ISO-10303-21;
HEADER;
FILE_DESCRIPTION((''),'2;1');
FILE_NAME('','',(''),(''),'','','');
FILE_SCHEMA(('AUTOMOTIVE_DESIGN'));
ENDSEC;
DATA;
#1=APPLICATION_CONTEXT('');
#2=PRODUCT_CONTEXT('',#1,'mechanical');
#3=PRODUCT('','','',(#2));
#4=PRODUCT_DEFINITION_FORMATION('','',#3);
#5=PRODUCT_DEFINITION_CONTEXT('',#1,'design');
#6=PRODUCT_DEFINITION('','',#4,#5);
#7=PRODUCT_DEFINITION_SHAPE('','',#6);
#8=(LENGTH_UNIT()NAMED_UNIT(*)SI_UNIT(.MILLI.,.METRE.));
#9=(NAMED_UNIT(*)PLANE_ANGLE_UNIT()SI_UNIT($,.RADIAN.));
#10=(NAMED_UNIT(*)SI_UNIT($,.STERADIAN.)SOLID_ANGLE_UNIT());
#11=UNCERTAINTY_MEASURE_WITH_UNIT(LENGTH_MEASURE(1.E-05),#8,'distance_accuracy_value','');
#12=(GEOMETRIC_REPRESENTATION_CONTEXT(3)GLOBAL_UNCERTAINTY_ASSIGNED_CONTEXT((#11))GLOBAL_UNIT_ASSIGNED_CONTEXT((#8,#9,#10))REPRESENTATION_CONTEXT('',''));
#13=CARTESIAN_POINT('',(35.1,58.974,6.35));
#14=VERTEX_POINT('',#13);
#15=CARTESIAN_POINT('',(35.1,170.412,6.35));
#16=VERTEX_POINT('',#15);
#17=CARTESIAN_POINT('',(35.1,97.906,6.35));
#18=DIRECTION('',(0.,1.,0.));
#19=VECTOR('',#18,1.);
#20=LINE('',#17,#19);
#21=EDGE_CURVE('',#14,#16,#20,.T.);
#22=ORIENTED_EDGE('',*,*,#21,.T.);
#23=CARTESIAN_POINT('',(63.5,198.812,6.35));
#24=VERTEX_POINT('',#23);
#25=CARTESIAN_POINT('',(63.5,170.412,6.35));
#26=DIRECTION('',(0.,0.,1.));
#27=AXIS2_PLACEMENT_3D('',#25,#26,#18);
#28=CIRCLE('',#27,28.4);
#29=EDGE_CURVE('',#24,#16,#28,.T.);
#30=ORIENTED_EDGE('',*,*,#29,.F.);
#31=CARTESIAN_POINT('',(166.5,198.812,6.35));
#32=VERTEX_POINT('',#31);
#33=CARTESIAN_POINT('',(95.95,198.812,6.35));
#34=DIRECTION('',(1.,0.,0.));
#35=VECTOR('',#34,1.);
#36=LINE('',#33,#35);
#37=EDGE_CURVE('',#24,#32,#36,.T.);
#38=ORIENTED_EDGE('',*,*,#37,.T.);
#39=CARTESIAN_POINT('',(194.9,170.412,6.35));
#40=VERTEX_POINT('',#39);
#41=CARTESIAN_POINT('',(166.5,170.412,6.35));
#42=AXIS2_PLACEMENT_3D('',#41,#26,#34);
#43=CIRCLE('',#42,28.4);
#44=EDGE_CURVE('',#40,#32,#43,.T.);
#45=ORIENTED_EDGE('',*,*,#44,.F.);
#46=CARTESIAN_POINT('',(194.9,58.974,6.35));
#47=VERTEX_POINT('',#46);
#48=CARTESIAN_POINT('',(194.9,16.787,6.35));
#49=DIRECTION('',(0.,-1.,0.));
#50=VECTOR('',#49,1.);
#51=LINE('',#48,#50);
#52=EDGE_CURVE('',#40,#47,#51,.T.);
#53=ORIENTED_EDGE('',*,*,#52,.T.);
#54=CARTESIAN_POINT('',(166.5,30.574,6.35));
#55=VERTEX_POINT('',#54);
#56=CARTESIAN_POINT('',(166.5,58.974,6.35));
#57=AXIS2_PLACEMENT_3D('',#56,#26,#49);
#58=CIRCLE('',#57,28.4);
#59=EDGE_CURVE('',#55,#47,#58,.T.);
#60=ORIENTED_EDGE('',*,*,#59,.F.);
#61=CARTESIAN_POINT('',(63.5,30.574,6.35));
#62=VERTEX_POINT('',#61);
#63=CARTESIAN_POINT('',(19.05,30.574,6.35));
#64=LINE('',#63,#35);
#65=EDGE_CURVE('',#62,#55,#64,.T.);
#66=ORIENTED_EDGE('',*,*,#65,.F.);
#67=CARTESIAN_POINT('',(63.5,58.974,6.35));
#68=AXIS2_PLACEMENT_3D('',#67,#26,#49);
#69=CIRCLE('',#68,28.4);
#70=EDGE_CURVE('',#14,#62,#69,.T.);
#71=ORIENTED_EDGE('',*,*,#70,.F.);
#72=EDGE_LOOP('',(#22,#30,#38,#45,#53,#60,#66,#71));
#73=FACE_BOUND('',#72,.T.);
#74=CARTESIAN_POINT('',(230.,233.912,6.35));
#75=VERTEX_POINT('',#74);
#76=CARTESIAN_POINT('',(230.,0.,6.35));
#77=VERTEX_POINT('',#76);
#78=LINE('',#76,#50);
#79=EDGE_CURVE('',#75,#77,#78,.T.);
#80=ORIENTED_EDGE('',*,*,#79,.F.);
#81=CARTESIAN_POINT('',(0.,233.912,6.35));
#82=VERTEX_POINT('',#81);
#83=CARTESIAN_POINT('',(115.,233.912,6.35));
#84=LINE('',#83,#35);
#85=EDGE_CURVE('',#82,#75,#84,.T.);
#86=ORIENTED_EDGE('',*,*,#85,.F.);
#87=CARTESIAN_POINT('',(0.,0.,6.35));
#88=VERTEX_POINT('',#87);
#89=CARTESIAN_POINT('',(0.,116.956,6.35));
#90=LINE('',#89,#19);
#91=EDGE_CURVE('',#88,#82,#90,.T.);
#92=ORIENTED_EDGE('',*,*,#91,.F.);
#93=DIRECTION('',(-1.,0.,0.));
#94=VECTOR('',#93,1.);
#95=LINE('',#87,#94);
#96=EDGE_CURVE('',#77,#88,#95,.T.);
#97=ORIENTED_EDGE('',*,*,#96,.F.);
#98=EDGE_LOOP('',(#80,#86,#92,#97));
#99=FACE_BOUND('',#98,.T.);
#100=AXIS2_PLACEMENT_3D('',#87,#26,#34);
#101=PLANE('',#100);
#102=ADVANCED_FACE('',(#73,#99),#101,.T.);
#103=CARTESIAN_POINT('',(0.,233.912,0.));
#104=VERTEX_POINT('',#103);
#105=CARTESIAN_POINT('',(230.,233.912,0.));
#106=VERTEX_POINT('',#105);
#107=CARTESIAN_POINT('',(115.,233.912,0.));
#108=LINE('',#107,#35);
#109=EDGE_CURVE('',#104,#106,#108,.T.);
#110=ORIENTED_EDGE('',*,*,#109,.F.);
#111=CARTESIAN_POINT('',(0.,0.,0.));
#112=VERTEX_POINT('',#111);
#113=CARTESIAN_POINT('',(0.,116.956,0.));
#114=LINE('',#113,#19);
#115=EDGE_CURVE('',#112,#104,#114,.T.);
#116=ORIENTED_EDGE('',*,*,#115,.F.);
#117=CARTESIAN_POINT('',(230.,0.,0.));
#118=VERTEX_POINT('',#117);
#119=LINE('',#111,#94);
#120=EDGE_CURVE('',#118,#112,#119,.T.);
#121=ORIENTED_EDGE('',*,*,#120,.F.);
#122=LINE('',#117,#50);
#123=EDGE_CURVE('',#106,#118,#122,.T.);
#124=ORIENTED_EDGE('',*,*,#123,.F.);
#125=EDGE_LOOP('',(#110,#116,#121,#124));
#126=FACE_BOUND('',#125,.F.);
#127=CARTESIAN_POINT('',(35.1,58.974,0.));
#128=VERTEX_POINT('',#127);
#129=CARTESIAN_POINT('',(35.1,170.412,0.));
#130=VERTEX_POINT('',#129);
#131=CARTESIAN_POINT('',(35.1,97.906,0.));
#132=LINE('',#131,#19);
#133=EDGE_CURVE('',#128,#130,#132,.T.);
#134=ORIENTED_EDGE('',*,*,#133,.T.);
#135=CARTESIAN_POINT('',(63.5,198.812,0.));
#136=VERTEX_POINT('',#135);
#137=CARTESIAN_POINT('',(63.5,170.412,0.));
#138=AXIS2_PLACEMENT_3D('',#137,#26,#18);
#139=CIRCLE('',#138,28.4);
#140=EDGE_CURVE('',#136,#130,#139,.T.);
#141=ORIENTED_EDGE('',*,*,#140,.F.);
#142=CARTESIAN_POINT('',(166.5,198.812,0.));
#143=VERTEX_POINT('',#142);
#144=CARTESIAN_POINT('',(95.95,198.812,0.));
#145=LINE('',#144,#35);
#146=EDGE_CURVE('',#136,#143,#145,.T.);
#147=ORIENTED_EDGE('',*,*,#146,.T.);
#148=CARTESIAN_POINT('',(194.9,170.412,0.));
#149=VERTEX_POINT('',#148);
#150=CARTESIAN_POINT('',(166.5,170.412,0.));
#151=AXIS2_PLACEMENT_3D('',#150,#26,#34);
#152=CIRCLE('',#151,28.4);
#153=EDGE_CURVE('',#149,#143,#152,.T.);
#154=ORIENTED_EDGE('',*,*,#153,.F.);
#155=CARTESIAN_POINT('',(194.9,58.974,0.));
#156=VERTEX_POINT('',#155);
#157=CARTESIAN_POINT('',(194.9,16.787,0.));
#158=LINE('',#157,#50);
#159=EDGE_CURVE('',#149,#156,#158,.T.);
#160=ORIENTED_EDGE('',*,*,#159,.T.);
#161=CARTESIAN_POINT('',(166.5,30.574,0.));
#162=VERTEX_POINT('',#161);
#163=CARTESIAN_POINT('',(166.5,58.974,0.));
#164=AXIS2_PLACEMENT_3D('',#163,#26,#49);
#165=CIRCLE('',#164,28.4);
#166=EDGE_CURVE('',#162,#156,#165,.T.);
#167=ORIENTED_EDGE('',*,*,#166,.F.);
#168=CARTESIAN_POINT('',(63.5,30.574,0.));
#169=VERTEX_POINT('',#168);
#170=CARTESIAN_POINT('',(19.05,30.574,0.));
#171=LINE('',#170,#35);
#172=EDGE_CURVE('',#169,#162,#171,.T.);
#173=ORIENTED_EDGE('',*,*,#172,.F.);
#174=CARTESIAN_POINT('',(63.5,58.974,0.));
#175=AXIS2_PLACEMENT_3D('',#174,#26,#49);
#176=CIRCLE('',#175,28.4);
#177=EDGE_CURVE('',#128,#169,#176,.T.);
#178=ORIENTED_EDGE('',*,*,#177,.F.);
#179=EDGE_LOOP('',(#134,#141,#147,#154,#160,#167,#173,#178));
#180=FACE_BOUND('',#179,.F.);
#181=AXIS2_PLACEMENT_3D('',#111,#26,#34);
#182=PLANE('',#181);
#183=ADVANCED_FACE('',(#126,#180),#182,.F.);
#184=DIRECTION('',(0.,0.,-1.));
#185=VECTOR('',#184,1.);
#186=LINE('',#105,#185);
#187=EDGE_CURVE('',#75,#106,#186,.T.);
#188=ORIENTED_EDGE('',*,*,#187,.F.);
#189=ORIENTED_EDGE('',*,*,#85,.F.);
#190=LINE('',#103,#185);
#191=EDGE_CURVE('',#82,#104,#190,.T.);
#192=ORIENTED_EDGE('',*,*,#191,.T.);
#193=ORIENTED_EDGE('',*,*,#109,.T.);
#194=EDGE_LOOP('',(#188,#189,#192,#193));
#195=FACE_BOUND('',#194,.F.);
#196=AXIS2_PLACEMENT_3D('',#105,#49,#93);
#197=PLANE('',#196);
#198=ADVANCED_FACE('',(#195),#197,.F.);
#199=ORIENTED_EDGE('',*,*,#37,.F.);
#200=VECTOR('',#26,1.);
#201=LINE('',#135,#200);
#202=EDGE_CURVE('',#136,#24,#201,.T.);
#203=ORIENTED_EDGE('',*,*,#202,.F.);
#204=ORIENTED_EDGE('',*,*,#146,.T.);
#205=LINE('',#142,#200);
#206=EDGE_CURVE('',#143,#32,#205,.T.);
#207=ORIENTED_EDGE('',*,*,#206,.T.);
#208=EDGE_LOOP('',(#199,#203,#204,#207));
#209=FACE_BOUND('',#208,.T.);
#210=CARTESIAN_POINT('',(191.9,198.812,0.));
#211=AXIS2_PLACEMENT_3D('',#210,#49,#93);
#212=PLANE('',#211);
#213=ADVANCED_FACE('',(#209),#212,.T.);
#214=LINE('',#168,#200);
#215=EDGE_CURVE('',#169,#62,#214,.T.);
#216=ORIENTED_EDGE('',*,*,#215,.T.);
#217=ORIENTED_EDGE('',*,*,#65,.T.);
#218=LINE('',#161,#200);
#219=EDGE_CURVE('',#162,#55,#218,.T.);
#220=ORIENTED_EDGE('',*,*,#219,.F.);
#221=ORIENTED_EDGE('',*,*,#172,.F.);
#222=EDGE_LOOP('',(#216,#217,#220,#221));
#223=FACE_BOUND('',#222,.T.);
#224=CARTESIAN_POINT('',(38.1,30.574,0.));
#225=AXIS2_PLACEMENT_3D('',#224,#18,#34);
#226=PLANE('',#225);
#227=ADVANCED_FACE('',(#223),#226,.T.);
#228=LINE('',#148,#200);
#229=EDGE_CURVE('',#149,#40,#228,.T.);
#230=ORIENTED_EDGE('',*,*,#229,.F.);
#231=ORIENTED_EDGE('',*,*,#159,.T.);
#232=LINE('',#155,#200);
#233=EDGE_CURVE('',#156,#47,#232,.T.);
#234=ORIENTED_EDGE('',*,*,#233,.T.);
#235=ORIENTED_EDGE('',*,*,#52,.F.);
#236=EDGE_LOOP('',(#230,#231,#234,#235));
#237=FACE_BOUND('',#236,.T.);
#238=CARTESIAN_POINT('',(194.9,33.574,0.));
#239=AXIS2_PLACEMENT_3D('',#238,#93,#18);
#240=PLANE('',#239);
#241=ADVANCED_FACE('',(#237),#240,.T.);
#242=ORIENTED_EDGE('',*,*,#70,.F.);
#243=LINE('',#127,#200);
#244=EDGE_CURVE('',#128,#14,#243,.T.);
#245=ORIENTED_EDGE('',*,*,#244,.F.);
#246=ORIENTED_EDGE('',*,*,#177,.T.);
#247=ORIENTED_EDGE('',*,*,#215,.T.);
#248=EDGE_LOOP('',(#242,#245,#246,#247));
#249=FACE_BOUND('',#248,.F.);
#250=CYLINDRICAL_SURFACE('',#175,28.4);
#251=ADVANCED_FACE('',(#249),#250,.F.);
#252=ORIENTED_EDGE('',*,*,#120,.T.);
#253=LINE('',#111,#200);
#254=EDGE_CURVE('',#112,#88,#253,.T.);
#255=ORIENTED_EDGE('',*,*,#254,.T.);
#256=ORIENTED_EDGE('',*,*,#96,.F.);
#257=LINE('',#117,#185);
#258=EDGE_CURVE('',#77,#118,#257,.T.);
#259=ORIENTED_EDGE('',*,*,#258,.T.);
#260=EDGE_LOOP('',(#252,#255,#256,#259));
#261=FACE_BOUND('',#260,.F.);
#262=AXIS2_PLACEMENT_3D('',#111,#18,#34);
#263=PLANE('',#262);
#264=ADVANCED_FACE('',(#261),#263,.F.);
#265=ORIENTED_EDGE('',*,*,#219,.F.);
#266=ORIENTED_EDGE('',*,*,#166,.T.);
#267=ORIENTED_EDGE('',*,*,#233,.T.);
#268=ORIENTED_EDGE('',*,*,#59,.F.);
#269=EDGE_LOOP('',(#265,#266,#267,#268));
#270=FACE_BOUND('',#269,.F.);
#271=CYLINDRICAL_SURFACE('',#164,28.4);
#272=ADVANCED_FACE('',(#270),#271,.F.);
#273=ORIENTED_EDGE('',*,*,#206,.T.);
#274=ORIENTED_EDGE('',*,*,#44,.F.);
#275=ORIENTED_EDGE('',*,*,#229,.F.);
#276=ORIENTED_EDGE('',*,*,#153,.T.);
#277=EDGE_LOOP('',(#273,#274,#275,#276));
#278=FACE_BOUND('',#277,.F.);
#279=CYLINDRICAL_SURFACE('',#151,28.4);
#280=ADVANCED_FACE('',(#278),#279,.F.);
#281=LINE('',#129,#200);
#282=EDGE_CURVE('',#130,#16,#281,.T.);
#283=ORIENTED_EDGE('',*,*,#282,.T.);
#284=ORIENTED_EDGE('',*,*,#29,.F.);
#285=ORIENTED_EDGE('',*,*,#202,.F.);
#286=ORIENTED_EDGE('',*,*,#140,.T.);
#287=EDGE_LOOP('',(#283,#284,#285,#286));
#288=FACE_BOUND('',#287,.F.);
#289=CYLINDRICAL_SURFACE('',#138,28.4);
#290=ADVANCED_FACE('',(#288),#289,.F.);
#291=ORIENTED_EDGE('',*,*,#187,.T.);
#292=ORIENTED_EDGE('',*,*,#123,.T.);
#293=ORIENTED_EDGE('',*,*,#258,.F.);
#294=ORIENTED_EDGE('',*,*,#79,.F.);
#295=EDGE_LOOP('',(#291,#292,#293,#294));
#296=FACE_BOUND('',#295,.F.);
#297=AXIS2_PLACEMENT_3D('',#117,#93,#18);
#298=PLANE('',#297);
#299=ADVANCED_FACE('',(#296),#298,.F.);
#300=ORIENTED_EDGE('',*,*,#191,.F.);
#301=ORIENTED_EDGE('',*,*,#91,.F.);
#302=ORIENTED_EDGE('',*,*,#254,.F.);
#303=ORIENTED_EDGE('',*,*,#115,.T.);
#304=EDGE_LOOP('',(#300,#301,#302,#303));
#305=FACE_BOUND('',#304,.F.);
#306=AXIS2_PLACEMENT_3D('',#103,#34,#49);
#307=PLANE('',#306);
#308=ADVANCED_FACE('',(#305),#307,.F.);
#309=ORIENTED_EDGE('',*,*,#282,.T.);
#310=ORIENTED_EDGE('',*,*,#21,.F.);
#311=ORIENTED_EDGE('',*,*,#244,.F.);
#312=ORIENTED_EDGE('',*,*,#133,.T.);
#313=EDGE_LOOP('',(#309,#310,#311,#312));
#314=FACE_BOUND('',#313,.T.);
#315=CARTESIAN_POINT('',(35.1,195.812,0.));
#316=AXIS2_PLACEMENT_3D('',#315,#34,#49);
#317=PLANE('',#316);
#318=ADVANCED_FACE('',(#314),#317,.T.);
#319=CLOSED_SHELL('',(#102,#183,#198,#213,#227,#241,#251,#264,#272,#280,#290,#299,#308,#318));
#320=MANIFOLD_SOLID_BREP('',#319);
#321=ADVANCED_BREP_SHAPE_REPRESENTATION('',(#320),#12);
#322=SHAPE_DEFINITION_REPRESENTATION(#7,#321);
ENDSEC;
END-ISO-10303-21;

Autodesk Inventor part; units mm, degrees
ref_plane "YZ Plane" through (0, 0, 0) normal (1, 0, 0) x (0, 1, 0)
ref_plane "XZ Plane" through (0, 0, 0) normal (0, 1, 0) x (-1, 0, 0)
ref_plane "XY Plane" through (0, 0, 0) normal (0, 0, 1) x (1, 0, 0)
sketch "Sketch1" plane through (0, 0, 0) normal (0, 0, 1) x (1, 0, 0)
  line L0 (0, 0) -> (230, 0)
  line L1 (230, 0) -> (230, 233.912)
  line L2 (230, 233.912) -> (0, 233.912)
  line L3 (0, 233.912) -> (0, 0)
  line L4 (38.1, 33.574) -> (191.9, 33.574)
  line L5 (191.9, 33.574) -> (191.9, 195.812)
  line L6 (191.9, 195.812) -> (38.1, 195.812)
  line L7 (38.1, 195.812) -> (38.1, 33.574)
  dimension "d0" = 230
  dimension "d1" = 233.912
  dimension "d2" = 33.574
  dimension "d3" = 38.1
  dimension "d4" = 38.1
  dimension "d5" = 38.1
extrude "Extrusion1" add sketch "Sketch1" along normal blind 6.35
fillet "Fillet3" radius 25.4 4 edges at (191.9, 33.574, 3.175) (38.1, 33.574, 3.175) (38.1, 195.812, 3.175) (191.9, 195.812, 3.175)
thicken "Thicken2" operation cut thickness 3 both sides no extend neighbours yes toward (0, 1, 0) faces at (97.8333, 195.812, 4.2333) (38.1, 96.12, 2.1167) (191.9, 133.266, 4.2333) (132.1667, 33.574, 4.2333) (183.7764, 189.0315, 2.1167) (39.8558, 179.6917, 2.1167) (180.8083, 37.9875, 2.1167) (61.6019, 33.645, 2.1167)
equation "\"d4\" = d3"
properties part number "Door Panel Front Foam" material "Polyurethane Foam"
